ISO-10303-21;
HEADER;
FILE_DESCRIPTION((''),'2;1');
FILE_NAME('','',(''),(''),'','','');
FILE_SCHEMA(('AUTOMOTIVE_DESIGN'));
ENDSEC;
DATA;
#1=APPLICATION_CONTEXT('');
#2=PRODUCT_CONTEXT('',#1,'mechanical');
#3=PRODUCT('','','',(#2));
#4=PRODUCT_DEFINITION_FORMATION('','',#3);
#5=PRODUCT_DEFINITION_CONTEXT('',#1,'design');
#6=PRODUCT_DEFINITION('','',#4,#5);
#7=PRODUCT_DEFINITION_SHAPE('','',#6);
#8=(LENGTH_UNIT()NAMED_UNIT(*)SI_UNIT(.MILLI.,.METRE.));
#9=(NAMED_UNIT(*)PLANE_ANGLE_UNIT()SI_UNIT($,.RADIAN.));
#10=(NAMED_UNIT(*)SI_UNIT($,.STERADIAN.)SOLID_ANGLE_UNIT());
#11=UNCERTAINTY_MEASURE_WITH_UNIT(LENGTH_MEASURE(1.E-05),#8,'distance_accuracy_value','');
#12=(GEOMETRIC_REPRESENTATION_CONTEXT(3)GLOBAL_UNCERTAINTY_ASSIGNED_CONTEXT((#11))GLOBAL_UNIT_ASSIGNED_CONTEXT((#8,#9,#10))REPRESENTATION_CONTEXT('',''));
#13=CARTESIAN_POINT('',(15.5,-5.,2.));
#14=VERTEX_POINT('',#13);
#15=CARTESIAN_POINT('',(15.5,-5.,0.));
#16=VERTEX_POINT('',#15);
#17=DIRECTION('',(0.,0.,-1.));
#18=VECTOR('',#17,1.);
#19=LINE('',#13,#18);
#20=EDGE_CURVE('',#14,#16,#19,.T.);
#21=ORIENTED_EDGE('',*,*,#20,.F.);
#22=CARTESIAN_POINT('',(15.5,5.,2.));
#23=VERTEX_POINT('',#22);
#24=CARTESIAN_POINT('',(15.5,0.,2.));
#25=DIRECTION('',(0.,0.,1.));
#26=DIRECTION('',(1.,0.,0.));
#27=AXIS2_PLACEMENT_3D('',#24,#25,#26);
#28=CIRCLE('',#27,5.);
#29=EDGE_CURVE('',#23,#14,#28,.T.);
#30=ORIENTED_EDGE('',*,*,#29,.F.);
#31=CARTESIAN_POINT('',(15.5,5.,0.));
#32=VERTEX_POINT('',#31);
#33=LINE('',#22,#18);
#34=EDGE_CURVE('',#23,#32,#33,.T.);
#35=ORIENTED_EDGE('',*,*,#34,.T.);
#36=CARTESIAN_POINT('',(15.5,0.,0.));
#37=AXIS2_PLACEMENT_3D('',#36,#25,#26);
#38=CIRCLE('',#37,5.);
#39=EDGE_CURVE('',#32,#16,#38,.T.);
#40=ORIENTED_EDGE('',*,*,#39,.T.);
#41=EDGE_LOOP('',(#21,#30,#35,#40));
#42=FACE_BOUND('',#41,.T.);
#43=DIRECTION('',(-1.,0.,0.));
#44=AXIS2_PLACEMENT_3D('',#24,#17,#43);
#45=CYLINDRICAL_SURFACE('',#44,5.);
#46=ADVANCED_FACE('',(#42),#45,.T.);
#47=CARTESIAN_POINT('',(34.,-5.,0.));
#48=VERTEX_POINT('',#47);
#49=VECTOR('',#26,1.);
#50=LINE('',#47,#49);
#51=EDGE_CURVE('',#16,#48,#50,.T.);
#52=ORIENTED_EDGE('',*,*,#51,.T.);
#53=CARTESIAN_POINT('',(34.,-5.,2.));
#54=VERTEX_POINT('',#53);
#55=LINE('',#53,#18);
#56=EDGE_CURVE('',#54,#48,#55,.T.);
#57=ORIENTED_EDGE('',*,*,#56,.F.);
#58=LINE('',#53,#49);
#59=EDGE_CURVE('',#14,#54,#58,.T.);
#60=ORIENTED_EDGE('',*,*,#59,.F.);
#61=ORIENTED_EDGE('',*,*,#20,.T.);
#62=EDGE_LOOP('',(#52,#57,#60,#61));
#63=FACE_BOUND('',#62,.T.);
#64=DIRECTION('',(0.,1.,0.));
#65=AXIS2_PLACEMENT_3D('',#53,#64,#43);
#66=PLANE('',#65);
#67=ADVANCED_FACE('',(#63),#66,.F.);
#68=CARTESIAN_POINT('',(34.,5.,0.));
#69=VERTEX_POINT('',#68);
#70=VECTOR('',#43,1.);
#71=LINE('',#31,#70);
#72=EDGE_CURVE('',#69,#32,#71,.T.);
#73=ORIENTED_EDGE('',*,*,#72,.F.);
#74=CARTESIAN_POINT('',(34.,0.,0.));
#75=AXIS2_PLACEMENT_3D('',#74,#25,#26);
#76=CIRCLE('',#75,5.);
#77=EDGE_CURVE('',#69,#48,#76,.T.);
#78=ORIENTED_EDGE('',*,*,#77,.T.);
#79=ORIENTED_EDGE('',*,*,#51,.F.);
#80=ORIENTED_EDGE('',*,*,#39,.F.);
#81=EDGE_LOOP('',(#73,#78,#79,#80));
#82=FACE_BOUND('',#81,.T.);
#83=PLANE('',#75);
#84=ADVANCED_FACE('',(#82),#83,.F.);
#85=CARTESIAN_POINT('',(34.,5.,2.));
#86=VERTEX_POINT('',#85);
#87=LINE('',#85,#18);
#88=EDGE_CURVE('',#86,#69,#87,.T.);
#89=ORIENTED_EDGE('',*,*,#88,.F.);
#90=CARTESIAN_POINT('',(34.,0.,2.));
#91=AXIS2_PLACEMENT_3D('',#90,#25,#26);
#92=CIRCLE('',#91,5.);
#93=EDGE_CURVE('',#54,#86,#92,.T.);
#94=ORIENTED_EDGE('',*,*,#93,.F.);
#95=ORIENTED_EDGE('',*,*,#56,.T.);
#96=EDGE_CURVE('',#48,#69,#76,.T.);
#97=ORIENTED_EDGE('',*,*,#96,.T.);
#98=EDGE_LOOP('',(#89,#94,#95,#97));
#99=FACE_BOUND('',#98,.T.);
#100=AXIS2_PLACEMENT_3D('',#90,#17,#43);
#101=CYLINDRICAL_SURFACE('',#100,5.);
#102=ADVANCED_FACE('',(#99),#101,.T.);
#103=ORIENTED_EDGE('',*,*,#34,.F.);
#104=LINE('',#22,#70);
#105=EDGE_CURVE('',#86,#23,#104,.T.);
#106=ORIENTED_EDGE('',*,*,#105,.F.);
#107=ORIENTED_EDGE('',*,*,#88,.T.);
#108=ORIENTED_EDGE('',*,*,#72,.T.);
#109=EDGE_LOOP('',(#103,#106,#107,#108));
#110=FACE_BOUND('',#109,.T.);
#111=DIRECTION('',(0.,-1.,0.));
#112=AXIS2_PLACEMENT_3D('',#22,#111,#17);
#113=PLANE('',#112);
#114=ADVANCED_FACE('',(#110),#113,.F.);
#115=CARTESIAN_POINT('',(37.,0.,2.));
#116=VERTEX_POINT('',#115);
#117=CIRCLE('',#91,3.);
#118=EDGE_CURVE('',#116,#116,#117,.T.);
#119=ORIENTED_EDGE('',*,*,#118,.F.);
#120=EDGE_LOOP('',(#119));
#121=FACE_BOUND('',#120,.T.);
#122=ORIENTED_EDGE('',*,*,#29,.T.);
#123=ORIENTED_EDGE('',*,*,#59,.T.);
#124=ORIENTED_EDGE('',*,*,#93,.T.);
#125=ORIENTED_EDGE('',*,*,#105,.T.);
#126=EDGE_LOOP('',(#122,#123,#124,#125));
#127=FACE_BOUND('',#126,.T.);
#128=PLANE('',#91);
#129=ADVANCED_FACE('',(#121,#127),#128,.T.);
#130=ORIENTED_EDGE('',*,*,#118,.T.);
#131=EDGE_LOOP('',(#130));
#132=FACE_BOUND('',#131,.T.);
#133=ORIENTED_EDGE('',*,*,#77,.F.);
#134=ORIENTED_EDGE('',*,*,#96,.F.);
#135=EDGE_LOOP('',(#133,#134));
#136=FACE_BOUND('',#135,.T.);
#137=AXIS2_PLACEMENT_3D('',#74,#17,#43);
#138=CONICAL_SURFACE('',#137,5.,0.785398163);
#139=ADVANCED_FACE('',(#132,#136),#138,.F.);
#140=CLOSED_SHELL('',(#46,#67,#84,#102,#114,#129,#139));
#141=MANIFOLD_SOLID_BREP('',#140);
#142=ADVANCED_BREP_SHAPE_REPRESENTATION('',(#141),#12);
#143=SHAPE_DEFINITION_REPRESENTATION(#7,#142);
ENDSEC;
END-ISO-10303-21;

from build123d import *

# Parameters (mm, degrees)
SKETCH1_R           = 3
BOSS_EXTRUDE1_DEPTH = 2
CHAMFER1_SIZE       = 2


with BuildPart() as part:
    # Sketch1 → Boss-Extrude1 (new body)
    with BuildSketch(Plane.XY):
        with BuildLine():
            Line((34, -5), (15.5, -5))
            ThreePointArc((15.5, -5), (10.5, 0), (15.5, 5))
            Line((15.5, 5), (34, 5))
            ThreePointArc((34, 5), (39, 0), (34, -5))
        make_face()
        with Locations((34, 0)):
            Circle(SKETCH1_R, mode=Mode.SUBTRACT)
    extrude(amount=BOSS_EXTRUDE1_DEPTH)

    # Chamfer1
    chamfer1_edges = [part.edges().sort_by_distance(p)[0] for p in [
        (31, 0, 0),
    ]]
    chamfer(chamfer1_edges, length=CHAMFER1_SIZE - 0.0001)  # a hair under: the kernel refuses the full size


solid = part.part
